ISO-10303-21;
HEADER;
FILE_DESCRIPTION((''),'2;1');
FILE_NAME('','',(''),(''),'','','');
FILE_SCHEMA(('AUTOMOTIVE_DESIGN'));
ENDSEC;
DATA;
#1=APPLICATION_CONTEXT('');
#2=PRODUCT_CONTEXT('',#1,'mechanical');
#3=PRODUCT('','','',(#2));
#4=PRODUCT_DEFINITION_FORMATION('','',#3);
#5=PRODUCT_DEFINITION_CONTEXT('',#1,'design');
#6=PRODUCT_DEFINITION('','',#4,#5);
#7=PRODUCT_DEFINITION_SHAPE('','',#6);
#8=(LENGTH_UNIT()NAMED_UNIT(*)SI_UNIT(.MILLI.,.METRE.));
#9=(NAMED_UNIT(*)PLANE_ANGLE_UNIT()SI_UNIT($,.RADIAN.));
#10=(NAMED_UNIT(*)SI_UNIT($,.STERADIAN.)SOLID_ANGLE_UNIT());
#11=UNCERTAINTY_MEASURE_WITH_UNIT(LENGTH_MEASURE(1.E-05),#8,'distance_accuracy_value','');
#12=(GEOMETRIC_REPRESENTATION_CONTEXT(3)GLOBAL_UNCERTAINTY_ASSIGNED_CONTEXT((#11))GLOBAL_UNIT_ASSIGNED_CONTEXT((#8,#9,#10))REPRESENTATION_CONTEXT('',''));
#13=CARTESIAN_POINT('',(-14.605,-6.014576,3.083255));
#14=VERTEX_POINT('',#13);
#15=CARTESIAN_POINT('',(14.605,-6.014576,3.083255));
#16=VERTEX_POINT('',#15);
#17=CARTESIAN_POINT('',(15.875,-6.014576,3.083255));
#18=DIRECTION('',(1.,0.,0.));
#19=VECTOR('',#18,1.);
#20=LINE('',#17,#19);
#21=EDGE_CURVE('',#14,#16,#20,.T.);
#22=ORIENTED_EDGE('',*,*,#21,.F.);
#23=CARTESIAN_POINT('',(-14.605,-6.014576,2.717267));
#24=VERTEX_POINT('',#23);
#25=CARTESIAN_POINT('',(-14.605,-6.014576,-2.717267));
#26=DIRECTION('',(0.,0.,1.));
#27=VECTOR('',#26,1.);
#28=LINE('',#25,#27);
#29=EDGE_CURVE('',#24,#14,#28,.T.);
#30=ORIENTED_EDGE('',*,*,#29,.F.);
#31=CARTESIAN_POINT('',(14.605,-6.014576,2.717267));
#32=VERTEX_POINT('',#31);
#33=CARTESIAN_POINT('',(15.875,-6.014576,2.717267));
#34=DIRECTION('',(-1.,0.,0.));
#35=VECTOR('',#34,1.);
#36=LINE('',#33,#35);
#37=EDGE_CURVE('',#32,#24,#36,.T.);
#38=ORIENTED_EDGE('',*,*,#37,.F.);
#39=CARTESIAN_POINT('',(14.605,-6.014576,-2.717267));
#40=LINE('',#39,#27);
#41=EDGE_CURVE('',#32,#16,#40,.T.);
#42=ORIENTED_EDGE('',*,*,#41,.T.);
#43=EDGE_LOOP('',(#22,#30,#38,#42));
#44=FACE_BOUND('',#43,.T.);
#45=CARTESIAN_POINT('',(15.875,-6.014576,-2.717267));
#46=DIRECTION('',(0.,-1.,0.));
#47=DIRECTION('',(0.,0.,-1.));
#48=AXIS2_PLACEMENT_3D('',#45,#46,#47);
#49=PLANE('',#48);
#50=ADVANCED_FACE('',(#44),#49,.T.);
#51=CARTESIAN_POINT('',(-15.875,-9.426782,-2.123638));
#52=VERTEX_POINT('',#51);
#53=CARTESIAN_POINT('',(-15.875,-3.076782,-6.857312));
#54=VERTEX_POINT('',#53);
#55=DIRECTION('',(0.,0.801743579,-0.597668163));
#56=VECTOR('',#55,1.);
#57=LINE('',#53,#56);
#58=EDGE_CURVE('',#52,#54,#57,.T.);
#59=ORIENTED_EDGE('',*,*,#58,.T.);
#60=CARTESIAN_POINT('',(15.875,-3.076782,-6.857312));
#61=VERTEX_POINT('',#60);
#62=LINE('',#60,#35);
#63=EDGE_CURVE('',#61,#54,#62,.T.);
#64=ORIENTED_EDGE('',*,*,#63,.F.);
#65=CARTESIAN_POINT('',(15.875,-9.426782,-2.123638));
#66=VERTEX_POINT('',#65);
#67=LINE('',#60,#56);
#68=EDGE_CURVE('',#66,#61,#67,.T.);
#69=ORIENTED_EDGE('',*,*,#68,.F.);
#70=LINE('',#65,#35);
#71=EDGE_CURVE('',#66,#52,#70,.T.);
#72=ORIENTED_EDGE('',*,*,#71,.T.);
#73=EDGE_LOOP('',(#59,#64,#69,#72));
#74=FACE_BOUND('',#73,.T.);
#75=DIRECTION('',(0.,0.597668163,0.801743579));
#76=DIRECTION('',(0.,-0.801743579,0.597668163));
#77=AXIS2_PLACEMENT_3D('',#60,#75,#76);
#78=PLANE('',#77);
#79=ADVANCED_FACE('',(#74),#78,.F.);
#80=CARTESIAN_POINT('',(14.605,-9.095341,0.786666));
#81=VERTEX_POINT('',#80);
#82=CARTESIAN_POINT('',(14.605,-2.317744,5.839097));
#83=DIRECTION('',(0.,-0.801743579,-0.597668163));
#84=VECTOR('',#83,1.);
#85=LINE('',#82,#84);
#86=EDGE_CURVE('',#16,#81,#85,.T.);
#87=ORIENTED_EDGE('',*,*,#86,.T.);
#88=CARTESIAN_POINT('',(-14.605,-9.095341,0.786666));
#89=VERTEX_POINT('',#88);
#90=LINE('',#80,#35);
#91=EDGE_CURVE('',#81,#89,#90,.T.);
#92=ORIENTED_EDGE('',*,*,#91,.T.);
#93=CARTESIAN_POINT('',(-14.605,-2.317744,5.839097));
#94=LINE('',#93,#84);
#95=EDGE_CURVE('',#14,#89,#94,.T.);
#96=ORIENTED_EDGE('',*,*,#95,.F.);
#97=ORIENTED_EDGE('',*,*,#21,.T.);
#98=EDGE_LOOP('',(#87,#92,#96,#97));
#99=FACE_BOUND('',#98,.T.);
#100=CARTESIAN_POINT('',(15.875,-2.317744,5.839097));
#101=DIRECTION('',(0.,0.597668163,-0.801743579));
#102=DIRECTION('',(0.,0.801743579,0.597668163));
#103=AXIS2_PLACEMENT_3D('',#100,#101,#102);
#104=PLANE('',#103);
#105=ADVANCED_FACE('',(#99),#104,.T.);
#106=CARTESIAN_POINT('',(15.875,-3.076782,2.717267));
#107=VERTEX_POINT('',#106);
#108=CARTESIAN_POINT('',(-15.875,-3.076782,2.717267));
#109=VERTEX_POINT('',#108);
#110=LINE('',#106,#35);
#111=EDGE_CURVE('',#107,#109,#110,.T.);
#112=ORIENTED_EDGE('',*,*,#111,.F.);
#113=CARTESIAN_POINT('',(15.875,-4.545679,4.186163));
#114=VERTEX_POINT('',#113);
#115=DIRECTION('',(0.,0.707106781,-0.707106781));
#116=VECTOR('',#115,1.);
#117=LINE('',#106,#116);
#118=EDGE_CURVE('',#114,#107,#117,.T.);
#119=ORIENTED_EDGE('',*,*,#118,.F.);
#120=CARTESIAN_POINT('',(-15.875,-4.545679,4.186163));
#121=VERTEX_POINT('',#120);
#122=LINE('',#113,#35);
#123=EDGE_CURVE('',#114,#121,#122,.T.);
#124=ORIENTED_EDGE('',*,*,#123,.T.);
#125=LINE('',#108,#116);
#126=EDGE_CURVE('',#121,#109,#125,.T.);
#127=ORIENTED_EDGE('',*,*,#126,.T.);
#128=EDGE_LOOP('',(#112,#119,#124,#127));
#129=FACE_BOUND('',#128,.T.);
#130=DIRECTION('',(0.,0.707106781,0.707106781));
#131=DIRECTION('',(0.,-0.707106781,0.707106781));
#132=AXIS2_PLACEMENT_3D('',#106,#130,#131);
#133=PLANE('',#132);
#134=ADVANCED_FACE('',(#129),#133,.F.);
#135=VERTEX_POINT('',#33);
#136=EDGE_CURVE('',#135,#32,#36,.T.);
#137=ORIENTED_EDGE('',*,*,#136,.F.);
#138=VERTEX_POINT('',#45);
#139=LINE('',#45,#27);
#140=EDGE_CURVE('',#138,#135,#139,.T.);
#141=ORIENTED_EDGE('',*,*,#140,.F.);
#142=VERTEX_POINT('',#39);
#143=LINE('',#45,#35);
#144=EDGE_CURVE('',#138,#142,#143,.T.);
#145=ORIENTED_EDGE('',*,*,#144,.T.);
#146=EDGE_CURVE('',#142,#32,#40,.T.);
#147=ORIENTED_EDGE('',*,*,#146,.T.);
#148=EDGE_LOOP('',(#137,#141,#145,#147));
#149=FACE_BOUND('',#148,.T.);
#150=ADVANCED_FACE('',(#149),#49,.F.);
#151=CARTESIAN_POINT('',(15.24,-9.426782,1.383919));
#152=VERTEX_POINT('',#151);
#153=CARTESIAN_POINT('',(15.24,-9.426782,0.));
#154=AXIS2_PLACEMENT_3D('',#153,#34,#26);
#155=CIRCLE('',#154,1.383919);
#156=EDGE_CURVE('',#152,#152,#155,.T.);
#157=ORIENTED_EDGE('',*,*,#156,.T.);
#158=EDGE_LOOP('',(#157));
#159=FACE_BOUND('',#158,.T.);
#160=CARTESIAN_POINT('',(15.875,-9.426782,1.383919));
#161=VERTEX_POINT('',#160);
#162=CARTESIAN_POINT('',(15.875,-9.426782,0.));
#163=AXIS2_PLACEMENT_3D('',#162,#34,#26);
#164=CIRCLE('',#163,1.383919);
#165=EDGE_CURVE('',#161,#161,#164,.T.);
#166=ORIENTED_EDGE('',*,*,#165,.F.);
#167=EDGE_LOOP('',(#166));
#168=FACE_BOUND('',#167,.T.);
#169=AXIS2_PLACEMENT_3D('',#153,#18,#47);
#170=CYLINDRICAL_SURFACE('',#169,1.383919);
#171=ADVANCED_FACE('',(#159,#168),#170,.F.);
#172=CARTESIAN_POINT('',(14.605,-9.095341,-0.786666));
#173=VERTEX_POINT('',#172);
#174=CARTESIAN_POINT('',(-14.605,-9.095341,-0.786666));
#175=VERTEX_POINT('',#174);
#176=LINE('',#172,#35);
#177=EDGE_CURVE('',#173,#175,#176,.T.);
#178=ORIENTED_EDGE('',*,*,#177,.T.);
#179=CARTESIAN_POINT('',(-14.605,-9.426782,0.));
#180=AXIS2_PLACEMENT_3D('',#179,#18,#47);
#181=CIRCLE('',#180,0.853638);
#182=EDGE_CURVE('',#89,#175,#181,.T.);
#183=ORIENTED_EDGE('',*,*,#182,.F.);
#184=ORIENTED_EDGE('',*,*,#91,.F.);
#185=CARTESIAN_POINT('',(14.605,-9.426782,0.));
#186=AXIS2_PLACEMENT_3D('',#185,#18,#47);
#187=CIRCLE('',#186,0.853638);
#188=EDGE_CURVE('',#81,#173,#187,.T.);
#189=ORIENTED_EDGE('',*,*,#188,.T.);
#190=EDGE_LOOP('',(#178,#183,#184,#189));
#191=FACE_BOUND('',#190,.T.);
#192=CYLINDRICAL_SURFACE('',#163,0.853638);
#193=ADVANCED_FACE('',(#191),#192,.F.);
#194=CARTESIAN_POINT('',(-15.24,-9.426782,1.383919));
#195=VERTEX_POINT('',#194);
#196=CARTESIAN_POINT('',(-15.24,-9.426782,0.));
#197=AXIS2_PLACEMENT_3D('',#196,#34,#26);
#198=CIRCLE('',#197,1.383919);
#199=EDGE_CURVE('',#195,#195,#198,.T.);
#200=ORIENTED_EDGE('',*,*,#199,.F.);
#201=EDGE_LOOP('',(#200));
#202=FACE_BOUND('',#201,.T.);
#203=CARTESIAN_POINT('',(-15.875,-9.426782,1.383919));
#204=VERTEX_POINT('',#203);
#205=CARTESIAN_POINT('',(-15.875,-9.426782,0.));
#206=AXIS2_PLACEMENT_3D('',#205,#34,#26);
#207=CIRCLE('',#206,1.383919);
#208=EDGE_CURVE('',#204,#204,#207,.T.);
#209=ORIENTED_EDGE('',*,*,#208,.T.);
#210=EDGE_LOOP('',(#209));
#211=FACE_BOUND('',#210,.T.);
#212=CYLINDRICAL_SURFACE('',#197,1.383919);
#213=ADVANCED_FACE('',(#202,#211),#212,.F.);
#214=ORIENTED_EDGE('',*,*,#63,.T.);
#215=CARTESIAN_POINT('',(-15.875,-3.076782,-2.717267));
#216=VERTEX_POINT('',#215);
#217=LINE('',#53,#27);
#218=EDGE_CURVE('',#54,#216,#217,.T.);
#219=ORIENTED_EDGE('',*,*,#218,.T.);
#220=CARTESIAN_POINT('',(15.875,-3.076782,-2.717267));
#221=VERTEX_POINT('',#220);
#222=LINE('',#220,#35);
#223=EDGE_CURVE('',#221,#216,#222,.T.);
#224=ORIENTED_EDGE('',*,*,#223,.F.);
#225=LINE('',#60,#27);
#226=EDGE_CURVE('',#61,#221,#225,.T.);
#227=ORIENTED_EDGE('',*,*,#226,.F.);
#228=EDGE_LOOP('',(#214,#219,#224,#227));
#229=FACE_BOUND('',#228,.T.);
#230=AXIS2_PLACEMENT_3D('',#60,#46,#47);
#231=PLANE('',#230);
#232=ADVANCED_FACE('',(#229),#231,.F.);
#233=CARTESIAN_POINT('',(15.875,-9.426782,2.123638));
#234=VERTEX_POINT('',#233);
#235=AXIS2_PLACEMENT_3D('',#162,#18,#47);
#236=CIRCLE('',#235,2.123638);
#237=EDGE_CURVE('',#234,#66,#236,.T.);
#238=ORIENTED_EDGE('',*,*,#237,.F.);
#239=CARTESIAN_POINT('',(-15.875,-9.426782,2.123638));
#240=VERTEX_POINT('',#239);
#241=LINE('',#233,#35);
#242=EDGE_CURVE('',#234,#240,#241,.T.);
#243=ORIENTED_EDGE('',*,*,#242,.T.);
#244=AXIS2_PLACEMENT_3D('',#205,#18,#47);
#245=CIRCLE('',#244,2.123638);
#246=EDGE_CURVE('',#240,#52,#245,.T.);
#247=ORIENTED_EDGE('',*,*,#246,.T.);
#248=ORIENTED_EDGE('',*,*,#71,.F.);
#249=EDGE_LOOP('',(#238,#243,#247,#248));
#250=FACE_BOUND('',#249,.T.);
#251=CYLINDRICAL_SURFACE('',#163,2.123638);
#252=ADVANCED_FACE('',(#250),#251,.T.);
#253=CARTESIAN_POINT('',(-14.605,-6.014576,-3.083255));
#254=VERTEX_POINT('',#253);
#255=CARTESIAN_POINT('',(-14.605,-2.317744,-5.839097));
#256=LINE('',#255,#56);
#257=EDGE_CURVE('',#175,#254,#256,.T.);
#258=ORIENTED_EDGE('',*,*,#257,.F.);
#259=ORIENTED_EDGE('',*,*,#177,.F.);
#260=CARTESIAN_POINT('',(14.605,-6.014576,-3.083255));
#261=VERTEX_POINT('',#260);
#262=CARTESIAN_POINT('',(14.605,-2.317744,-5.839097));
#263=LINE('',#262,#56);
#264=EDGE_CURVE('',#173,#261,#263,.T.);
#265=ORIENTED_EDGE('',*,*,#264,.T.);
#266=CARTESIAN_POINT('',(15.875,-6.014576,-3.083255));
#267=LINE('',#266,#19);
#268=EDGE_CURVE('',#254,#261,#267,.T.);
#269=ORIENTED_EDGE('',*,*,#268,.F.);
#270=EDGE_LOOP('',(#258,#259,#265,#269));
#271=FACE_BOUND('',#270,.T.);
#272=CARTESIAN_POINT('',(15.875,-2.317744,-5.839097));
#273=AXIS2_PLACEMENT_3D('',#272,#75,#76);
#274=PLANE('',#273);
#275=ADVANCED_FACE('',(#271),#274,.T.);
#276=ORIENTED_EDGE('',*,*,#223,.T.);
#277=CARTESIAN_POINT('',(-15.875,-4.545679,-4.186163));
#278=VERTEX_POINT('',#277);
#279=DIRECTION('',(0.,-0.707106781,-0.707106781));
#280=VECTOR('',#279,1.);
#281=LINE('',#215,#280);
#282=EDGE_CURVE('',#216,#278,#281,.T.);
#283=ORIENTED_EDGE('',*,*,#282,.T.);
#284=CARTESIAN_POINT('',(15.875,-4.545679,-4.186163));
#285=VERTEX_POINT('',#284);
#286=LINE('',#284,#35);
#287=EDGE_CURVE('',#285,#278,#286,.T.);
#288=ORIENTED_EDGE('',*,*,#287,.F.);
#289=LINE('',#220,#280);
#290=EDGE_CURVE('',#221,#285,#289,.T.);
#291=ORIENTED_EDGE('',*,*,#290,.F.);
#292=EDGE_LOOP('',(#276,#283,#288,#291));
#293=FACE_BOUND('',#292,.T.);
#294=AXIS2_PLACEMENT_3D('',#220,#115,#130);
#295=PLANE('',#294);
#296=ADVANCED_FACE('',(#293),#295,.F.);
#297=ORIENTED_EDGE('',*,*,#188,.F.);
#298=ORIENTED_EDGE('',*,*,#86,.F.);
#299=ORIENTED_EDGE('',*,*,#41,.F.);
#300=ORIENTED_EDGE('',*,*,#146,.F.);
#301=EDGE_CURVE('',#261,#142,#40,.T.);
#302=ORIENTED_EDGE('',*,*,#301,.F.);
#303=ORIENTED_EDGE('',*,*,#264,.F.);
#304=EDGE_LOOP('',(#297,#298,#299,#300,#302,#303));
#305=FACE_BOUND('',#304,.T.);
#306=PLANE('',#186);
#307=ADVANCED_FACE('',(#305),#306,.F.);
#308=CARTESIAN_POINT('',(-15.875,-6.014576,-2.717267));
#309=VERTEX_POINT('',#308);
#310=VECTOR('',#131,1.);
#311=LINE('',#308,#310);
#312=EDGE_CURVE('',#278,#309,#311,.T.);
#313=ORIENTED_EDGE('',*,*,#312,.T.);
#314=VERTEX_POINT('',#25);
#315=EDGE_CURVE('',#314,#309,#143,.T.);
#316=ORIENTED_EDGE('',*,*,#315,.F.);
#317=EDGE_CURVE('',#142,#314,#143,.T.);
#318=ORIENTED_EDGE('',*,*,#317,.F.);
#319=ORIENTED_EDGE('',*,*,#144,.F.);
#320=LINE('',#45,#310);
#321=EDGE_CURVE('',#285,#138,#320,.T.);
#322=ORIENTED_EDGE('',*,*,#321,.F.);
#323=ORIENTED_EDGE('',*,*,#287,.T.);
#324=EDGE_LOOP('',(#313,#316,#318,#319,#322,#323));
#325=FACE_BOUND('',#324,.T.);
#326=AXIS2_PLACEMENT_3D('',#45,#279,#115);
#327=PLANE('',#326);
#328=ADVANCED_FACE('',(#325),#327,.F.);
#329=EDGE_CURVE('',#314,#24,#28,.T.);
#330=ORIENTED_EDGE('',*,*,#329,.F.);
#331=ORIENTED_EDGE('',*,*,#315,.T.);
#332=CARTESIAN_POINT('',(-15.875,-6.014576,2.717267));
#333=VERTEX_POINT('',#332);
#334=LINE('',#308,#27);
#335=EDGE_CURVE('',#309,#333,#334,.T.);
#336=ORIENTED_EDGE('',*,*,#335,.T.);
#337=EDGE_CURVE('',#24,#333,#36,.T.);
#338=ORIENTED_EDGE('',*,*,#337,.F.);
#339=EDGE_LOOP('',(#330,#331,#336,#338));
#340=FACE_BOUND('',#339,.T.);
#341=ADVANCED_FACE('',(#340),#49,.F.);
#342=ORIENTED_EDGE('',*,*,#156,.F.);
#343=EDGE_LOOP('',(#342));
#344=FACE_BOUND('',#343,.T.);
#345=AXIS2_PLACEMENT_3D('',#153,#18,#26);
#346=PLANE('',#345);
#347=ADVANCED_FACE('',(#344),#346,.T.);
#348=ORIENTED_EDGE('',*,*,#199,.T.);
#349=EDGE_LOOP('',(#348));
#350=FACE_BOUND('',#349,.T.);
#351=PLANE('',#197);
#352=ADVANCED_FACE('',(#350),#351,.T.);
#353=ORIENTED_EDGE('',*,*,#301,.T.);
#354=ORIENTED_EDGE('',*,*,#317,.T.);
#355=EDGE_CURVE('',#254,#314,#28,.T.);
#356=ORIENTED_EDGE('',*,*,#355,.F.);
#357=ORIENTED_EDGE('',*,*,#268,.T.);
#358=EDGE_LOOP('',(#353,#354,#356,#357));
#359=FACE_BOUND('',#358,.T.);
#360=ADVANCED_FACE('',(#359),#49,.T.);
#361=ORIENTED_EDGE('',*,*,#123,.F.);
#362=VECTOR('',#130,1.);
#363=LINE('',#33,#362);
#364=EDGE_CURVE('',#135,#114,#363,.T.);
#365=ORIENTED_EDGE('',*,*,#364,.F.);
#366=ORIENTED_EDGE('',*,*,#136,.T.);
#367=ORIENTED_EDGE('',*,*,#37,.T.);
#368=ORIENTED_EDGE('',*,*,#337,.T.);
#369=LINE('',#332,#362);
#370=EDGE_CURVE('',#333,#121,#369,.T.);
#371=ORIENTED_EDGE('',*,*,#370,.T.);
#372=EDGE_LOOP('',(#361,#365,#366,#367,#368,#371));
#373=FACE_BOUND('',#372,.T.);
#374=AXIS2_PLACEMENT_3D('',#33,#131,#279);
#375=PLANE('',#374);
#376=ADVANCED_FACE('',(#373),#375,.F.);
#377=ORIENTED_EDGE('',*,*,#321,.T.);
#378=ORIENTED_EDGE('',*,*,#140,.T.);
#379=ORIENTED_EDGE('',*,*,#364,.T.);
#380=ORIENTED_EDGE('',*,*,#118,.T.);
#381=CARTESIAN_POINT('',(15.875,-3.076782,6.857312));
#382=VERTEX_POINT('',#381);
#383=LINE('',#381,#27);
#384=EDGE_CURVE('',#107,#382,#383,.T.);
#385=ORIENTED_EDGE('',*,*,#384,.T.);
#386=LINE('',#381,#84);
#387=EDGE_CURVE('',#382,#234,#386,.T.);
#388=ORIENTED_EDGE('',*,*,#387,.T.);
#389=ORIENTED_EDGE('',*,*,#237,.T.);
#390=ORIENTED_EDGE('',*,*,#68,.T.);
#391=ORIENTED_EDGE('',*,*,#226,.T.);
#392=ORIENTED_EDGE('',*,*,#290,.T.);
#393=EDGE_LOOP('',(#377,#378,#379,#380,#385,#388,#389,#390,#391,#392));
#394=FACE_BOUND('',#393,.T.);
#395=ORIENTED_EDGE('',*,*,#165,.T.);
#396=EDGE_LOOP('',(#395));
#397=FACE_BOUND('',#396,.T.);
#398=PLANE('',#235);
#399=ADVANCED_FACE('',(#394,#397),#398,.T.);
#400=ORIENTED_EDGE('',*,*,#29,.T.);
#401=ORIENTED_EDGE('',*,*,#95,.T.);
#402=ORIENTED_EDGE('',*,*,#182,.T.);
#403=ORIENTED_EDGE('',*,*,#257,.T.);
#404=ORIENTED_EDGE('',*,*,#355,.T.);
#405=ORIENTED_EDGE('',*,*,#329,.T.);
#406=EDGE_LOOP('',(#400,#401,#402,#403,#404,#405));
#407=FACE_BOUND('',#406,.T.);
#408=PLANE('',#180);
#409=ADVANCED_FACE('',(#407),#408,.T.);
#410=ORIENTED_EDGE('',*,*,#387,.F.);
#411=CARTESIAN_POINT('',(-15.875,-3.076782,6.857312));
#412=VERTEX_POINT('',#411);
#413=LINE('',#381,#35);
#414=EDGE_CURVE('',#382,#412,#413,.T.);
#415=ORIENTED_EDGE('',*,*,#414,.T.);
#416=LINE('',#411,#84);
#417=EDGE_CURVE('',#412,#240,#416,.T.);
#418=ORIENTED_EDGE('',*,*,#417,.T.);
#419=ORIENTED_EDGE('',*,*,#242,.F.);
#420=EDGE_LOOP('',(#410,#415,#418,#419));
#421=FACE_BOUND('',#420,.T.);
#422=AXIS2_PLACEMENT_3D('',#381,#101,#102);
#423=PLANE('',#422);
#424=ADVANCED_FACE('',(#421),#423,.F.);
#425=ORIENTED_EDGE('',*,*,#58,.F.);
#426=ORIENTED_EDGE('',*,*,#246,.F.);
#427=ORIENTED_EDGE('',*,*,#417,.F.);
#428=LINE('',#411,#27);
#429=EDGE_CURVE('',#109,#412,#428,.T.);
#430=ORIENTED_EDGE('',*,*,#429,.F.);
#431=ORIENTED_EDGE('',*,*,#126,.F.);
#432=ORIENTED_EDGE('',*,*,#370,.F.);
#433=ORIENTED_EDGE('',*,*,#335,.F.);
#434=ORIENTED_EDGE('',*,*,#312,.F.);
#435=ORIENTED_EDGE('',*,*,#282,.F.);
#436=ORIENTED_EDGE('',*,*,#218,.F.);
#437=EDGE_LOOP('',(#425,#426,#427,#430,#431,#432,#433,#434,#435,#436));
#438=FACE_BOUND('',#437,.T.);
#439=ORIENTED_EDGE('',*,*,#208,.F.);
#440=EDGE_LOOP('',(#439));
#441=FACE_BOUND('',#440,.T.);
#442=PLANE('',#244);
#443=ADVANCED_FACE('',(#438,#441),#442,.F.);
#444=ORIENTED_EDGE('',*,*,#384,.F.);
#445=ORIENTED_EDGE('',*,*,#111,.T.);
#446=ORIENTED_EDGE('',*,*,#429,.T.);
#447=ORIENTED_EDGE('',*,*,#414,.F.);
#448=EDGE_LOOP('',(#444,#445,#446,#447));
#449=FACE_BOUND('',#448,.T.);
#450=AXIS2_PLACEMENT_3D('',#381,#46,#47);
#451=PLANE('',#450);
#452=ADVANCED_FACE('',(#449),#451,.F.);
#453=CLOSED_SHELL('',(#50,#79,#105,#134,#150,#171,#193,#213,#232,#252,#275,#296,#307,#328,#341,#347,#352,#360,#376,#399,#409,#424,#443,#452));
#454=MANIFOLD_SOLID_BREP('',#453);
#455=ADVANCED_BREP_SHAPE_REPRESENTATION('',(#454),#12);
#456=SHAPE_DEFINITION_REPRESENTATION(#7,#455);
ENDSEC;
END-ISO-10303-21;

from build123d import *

# Parameters (mm, degrees)
BOSS_EXTRUDE1_DEPTH = 15.875
SHELL1_START        = -14.605
SHELL1_DEPTH        = 29.21
SKETCH3_R           = 1.383918908
CUT_EXTRUDE2_DEPTH  = 0.635


# Read off the part's stored shape, not the designer's step: Shell1
with BuildPart() as part:
    # Sketch1 → Boss-Extrude1 (new, symmetric)
    with BuildSketch(Plane(origin=(0, 0, 0), x_dir=(0, 0, -1), z_dir=(1, 0, 0))):
        with BuildLine():
            Line((6.857311765, -3.076782348), (2.123637644, -9.426782348))
            ThreePointArc((2.123637644, -9.426782348), (0, -11.550419992), (-2.123637644, -9.426782348))
            Line((-2.123637644, -9.426782348), (-6.857311765, -3.076782348))
            Line((-6.857311765, -3.076782348), (-2.717266513, -3.076782348))
            Line((-2.717266513, -3.076782348), (-4.18616331, -4.545679146))
            Line((-4.18616331, -4.545679146), (-2.717266513, -6.014575943))
            Line((-2.717266513, -6.014575943), (2.717266513, -6.014575943))
            Line((2.717266513, -6.014575943), (4.18616331, -4.545679146))
            Line((4.18616331, -4.545679146), (2.717266513, -3.076782348))
            Line((2.717266513, -3.076782348), (6.857311765, -3.076782348))
        make_face()
    extrude(amount=BOSS_EXTRUDE1_DEPTH, both=True)

    # Shell1 outline → Shell1 (cut)
    with BuildSketch(Plane.YZ.offset(SHELL1_START)):
        with BuildLine():
            Line((-6.014575943, -3.083255099), (-6.014575943, 3.083255099))
            Line((-6.014575943, 3.083255099), (-9.095341146, 0.786666357))
            ThreePointArc((-9.095341146, 0.786666357), (-10.280419992, 0), (-9.095341146, -0.786666357))
            Line((-9.095341146, -0.786666357), (-6.014575943, -3.083255099))
        make_face()
    extrude(amount=SHELL1_DEPTH, mode=Mode.SUBTRACT)

    # Sketch3 → Cut-Extrude2 (cut)
    with BuildSketch(Plane.ZY.offset(15.875)):
        with Locations((0, -9.426782348)):
            Circle(SKETCH3_R)
    cut_extrude2 = extrude(amount=-CUT_EXTRUDE2_DEPTH, mode=Mode.SUBTRACT)

    # Mirror1: Cut-Extrude2 across plane
    add(cut_extrude2.mirror(Plane(origin=(0, 0, 0), x_dir=(0, 0, 1), z_dir=(1, 0, 0))), mode=Mode.SUBTRACT)


solid = part.part
